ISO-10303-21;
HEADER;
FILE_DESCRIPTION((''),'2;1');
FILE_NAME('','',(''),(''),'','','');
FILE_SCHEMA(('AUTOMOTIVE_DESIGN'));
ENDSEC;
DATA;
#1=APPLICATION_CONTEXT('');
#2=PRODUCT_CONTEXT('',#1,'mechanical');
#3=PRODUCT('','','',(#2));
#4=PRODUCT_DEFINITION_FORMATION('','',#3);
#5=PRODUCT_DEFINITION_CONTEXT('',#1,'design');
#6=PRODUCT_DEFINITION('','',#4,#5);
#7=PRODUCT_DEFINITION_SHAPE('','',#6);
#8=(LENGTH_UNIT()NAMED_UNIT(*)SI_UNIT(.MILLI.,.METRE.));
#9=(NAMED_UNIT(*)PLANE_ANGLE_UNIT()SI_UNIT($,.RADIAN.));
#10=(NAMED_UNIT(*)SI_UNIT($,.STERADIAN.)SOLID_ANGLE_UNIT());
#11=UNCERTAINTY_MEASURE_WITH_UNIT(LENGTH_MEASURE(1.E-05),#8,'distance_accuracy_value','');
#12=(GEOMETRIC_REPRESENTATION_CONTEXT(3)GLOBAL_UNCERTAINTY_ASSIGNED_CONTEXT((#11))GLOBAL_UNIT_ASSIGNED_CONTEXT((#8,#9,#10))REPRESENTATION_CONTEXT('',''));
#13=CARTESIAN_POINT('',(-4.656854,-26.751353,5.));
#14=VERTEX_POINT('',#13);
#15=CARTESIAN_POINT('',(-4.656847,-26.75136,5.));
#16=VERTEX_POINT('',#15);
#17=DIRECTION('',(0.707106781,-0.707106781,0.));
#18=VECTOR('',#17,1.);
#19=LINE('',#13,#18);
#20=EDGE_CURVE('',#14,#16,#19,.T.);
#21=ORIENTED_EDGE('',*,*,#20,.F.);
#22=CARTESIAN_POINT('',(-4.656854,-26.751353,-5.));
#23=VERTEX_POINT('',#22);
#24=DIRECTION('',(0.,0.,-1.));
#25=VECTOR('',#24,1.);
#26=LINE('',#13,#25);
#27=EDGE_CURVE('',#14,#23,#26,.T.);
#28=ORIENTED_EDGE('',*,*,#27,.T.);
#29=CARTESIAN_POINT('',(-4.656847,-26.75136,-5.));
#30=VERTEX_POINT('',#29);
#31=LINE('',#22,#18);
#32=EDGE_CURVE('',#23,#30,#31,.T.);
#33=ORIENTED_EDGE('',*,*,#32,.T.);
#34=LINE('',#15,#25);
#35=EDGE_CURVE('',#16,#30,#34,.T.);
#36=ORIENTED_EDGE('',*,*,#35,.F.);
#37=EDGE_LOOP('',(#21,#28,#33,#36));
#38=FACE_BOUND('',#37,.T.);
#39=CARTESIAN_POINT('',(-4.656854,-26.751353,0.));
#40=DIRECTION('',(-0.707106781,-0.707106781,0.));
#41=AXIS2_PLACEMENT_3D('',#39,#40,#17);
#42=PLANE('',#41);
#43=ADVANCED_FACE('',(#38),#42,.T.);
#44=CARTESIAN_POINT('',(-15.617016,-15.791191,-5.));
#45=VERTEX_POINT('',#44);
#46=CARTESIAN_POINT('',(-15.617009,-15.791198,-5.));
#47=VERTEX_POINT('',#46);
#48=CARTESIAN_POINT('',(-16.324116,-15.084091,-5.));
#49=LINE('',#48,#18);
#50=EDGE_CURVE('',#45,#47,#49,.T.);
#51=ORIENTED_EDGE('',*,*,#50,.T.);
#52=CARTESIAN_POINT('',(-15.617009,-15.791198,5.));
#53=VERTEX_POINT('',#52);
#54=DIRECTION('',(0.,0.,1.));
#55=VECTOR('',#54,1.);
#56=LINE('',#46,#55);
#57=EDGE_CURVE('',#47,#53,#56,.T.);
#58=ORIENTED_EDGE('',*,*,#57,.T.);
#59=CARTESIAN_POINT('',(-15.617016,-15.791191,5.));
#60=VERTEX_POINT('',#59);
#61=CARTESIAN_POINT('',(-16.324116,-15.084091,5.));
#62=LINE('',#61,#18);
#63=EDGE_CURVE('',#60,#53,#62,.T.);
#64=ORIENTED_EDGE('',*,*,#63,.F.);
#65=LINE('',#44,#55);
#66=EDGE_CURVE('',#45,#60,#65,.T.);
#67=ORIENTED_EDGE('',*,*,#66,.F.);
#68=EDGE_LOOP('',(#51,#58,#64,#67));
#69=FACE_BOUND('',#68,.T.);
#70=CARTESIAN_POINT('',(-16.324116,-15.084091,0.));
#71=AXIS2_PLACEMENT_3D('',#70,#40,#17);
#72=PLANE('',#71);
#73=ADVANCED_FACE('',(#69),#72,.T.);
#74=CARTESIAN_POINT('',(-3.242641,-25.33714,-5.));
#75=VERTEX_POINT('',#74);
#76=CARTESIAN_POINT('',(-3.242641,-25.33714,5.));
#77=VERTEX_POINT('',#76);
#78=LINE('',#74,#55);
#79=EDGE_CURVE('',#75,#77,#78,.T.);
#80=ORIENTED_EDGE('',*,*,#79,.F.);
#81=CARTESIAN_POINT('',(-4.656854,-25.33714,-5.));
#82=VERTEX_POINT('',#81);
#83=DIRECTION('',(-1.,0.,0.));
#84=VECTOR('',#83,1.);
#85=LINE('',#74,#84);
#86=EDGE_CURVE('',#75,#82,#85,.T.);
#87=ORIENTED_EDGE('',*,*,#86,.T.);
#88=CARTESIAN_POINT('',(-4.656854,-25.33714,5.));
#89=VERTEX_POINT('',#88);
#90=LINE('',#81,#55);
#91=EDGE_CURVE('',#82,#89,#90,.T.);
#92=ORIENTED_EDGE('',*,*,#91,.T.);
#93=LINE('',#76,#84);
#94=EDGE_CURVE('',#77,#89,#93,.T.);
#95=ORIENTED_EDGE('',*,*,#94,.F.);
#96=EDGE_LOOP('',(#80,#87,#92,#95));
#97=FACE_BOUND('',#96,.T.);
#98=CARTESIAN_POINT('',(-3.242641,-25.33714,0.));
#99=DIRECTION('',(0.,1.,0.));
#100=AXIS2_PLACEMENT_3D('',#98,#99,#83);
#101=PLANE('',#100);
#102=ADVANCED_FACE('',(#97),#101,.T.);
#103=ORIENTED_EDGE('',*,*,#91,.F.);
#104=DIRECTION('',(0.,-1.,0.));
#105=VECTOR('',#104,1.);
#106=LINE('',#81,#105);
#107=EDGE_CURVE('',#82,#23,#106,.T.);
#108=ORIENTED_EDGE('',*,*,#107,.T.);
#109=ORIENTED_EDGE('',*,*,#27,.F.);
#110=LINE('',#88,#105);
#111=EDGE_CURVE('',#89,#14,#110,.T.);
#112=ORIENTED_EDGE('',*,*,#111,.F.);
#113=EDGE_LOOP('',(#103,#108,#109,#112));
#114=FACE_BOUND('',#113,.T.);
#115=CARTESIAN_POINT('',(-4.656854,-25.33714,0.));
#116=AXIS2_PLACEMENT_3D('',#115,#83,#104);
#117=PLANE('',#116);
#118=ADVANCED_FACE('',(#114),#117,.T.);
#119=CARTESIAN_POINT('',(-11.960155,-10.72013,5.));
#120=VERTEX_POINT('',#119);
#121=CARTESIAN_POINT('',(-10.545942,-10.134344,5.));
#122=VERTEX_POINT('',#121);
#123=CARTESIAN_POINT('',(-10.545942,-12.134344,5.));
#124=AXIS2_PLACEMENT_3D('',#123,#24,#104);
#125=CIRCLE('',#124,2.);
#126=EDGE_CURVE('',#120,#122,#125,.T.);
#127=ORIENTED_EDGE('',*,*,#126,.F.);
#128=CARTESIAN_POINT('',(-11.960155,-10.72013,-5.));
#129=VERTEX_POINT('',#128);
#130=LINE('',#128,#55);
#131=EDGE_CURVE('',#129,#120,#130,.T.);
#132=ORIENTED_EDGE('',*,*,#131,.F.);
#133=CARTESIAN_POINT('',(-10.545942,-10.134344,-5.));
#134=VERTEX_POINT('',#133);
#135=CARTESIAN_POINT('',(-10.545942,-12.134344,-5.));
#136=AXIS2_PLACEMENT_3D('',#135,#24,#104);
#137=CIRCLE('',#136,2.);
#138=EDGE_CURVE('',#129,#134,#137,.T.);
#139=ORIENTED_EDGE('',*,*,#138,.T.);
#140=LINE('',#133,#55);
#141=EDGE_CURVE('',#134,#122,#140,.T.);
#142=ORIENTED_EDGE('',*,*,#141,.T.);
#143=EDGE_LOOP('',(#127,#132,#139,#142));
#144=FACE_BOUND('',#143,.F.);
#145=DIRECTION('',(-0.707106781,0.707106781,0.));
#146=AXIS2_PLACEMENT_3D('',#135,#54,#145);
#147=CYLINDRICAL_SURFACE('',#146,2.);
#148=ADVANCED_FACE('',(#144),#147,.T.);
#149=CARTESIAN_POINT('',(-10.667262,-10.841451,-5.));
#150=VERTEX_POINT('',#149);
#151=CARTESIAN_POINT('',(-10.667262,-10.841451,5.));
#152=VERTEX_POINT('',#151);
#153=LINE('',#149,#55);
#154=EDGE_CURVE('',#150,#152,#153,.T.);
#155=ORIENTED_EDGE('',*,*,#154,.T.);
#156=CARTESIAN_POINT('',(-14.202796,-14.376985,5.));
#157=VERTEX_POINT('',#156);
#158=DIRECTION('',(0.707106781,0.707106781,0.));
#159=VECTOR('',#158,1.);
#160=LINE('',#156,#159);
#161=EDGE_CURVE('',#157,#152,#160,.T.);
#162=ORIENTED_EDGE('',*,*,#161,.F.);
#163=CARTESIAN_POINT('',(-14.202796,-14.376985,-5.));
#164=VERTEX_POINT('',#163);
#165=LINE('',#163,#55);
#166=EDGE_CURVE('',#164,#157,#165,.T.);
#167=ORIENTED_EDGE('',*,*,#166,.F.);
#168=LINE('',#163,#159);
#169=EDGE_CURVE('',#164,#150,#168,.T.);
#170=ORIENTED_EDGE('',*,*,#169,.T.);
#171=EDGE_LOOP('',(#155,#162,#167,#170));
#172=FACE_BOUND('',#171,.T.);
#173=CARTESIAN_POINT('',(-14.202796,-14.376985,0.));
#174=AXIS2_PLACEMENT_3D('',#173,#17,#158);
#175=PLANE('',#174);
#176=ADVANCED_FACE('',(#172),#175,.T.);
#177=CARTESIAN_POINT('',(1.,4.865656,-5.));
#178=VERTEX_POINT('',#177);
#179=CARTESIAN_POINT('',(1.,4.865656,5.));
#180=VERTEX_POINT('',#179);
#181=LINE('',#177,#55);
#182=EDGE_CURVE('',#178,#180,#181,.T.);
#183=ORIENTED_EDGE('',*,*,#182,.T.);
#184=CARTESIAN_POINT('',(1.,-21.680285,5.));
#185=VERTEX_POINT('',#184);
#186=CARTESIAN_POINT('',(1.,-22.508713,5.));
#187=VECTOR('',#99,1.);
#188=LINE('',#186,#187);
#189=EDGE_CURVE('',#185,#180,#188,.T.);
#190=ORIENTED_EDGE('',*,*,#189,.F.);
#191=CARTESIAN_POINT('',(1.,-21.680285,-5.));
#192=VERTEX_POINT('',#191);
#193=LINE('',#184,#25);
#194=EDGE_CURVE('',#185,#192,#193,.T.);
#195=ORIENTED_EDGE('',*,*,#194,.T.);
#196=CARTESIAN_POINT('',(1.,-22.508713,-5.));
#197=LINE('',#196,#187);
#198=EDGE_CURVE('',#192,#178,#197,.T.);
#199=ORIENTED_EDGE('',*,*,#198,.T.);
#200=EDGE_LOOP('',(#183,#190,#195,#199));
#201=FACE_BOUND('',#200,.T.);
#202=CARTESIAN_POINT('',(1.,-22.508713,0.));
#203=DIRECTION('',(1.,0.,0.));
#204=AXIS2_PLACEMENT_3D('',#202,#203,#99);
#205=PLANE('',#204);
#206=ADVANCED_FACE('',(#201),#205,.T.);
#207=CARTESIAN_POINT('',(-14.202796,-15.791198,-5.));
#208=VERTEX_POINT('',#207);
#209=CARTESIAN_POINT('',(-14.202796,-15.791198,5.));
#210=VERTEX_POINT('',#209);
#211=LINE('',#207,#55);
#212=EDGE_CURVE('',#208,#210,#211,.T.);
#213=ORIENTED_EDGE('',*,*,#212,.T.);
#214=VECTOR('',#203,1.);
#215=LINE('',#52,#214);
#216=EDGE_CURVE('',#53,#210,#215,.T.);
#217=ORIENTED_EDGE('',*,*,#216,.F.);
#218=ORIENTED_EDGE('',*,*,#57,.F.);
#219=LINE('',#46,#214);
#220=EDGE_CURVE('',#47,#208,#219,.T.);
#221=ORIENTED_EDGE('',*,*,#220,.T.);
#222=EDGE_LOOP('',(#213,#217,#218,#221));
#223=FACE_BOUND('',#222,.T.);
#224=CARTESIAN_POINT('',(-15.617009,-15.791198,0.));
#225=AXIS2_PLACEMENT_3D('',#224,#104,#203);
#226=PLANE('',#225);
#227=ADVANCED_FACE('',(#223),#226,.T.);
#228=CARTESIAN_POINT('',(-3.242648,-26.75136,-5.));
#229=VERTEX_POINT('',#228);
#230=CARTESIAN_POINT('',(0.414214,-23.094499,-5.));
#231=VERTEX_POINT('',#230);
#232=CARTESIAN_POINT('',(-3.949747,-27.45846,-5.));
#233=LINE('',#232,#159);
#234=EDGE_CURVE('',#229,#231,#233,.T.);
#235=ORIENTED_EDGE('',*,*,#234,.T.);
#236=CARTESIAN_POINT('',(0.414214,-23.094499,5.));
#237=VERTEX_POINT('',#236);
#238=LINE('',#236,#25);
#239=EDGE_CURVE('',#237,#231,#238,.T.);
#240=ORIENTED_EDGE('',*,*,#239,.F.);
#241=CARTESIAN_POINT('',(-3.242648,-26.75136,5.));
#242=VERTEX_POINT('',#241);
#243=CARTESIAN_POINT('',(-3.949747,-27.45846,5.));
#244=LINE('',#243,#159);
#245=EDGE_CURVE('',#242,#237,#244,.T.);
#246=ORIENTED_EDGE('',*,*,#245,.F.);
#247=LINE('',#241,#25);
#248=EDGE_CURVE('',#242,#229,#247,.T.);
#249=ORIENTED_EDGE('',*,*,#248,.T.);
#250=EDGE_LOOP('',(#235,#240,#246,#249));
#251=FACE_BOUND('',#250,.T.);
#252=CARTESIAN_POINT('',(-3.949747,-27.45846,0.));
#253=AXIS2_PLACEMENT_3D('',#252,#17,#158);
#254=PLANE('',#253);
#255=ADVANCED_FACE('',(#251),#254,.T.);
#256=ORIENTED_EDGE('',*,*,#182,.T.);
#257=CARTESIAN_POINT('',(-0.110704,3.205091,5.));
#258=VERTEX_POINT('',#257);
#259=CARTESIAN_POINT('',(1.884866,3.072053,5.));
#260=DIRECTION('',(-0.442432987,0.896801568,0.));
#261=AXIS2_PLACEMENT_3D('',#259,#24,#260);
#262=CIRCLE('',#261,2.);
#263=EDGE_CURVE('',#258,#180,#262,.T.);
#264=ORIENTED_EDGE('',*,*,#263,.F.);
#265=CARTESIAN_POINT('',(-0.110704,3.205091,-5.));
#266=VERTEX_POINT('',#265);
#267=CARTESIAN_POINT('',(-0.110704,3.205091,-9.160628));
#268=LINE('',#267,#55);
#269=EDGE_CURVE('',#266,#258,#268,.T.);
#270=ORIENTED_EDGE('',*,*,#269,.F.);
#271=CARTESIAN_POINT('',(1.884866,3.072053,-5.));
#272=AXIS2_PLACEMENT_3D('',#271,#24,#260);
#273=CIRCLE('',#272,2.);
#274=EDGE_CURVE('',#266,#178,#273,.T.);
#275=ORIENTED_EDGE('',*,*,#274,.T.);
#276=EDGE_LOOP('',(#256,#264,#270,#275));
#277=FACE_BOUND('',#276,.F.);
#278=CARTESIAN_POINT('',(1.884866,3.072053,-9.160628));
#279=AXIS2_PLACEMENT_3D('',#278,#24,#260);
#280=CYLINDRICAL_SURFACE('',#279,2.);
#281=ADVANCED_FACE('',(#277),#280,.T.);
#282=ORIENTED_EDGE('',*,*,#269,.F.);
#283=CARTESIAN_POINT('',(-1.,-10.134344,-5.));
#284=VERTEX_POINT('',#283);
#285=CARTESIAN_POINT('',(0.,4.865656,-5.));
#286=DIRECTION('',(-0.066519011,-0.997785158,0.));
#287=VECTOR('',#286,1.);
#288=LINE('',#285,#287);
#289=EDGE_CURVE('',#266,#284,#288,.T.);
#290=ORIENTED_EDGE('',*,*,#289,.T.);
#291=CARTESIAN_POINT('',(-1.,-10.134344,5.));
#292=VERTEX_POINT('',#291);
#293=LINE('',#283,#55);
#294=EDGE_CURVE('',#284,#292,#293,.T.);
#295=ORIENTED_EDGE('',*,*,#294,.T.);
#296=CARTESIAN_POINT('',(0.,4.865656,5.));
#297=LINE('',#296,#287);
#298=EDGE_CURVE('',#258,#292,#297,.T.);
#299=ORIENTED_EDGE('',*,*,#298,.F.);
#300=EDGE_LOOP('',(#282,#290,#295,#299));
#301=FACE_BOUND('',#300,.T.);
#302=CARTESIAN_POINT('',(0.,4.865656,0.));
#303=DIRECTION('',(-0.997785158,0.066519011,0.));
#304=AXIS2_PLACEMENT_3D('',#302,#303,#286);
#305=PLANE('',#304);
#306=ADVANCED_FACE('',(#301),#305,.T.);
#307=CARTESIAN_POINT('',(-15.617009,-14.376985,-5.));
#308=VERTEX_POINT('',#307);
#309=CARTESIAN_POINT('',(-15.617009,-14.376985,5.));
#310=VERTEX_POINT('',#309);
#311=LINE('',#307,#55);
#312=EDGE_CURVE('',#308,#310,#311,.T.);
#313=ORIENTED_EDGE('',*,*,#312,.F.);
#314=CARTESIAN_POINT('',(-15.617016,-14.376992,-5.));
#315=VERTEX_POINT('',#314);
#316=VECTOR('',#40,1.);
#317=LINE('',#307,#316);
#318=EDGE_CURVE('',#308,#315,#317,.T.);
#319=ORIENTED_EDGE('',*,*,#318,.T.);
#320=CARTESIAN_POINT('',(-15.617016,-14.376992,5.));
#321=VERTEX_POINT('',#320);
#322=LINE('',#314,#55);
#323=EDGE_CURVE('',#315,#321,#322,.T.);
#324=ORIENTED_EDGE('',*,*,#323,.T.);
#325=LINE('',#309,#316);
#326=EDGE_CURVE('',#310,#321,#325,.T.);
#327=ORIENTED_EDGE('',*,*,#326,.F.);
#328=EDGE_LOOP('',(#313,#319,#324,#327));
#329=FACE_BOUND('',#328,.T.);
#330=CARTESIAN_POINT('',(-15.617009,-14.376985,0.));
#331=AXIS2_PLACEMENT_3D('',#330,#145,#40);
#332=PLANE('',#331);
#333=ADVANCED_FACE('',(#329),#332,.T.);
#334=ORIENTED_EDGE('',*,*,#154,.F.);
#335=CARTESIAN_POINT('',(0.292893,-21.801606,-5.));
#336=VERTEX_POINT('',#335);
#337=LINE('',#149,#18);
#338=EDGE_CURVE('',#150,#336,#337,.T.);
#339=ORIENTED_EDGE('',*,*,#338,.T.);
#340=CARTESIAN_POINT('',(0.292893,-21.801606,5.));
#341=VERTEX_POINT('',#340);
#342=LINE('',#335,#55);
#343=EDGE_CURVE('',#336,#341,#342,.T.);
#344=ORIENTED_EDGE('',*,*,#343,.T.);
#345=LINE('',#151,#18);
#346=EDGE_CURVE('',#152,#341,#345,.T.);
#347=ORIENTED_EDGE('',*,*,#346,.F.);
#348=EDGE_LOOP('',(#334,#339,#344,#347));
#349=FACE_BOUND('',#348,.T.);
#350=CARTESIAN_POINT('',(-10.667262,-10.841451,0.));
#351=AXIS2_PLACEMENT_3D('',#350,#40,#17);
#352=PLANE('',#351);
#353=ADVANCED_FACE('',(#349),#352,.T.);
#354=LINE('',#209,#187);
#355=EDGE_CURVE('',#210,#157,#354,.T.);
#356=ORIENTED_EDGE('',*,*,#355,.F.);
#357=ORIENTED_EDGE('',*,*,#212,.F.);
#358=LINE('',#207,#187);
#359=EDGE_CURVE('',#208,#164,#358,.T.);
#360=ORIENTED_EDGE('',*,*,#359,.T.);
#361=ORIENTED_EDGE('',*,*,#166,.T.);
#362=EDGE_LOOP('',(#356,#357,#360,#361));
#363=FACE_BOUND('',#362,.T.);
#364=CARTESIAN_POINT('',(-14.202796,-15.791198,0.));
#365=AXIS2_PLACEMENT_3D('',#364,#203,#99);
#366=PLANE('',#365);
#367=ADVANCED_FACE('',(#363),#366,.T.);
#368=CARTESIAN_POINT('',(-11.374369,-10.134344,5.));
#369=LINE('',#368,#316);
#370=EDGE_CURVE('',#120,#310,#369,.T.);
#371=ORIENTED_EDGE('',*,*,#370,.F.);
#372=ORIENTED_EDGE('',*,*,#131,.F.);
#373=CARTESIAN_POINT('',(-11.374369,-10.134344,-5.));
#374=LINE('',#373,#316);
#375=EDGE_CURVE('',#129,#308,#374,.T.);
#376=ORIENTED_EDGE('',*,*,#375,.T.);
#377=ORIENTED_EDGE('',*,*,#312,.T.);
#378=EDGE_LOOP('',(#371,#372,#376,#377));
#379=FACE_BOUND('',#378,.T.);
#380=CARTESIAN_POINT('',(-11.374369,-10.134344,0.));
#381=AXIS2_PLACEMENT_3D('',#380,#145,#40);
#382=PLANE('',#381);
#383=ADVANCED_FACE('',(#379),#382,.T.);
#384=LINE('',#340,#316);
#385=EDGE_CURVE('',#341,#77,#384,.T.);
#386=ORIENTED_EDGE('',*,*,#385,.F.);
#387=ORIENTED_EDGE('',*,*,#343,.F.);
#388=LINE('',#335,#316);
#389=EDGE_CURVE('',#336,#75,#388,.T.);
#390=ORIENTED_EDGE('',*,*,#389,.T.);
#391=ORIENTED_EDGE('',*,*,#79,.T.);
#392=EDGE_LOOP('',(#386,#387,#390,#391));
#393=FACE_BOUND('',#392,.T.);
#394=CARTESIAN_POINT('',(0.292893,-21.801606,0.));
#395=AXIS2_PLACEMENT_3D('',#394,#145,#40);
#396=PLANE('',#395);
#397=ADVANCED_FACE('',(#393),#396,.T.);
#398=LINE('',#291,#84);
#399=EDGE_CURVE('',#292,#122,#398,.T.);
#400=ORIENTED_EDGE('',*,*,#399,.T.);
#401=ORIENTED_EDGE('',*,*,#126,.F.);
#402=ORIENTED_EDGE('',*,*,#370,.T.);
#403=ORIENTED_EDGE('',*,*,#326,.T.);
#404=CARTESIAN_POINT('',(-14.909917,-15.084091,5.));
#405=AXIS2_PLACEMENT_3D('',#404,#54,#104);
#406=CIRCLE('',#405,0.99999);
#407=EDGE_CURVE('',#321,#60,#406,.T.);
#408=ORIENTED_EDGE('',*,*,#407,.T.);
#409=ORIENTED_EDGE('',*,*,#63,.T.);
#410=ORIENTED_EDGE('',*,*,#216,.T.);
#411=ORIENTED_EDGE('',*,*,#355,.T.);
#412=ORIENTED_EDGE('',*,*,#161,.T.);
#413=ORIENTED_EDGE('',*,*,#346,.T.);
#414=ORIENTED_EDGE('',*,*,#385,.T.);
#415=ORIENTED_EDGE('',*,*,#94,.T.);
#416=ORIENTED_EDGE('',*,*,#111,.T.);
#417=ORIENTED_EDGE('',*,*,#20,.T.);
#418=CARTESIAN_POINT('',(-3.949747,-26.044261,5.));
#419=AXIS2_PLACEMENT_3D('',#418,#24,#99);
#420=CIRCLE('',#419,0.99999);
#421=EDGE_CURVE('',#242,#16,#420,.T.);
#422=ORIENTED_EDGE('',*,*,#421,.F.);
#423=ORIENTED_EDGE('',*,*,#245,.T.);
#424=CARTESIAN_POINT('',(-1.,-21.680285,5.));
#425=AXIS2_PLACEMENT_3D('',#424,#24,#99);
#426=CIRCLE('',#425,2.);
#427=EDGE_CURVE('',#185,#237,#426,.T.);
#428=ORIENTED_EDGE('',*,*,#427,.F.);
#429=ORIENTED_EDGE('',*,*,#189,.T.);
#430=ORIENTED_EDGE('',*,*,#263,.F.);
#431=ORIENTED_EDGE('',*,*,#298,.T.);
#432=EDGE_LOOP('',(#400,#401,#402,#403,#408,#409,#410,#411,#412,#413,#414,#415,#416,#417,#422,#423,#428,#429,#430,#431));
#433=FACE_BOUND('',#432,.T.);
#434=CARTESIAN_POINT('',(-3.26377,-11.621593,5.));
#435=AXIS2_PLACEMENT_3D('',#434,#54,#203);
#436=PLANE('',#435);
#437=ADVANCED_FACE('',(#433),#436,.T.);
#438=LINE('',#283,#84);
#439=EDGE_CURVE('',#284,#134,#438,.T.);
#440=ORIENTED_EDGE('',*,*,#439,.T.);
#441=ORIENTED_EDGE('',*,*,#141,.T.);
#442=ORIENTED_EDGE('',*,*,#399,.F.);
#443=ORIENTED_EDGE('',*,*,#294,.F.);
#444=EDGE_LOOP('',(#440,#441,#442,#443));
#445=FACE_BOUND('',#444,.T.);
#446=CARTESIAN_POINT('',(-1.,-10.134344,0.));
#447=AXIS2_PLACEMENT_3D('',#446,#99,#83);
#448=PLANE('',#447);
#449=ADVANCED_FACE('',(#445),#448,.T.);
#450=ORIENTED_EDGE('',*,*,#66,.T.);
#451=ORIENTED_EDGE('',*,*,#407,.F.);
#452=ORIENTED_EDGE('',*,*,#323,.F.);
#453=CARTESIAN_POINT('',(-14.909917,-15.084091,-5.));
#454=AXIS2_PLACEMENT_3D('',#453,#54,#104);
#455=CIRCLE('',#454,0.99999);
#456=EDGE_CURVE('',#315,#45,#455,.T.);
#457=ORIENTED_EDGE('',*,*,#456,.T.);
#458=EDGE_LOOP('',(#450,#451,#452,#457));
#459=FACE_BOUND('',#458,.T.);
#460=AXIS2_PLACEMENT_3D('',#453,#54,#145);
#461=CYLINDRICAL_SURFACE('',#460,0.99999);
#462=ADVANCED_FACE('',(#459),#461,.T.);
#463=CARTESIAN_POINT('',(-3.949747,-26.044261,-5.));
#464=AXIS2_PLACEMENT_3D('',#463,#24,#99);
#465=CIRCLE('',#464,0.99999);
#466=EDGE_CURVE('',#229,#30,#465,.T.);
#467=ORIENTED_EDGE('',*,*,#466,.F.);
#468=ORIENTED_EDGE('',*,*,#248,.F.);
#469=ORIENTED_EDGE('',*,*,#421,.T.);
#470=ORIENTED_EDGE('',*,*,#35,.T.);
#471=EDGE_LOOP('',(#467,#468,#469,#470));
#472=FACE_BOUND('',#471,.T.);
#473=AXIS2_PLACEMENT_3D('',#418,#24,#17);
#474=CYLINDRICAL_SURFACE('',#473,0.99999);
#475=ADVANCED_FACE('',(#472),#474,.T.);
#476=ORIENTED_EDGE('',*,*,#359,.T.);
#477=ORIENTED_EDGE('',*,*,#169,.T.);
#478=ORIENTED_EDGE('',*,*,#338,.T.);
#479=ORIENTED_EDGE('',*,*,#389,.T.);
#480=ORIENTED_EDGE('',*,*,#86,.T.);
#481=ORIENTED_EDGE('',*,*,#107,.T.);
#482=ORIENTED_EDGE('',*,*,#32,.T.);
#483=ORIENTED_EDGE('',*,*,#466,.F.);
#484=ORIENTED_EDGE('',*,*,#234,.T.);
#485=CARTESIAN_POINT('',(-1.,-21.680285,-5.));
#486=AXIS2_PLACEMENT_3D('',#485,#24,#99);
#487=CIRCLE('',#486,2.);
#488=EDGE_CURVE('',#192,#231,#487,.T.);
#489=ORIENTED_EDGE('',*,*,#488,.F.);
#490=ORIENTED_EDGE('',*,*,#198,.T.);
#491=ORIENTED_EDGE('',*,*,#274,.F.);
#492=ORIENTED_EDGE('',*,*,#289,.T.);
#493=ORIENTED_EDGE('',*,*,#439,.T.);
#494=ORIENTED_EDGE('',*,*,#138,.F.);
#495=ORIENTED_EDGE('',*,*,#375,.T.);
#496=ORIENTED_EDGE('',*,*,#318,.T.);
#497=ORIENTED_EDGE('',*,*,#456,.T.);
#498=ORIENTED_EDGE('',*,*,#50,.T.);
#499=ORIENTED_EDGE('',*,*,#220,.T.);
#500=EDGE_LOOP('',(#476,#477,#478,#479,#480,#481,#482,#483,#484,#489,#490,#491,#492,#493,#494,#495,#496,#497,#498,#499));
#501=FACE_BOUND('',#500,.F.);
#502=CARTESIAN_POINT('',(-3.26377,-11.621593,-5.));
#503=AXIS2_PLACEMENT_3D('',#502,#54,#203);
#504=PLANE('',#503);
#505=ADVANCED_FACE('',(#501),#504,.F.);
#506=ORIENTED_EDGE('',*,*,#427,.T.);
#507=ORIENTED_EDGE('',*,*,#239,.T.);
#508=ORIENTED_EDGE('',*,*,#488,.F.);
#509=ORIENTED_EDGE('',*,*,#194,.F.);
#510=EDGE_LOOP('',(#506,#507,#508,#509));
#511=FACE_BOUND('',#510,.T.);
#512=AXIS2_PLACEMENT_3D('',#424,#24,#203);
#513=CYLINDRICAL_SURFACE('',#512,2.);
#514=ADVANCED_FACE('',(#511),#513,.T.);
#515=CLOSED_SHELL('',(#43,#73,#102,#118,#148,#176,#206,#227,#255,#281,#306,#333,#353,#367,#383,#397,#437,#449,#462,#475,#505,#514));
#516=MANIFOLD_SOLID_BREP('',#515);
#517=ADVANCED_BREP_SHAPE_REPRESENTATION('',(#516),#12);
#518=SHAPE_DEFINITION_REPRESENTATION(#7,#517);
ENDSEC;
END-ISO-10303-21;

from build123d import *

# Parameters (mm, degrees)
F1_DEPTH    = 5
F2_R        = 2
F3_R        = 0.99999
F4_T1_DEPTH = 18.321255839


# Not quite as in the source:
# - a fillet or chamfer that OpenCascade refuses, or shapes differently, is made with other operations: its cross-section is extruded or revolved along the edge and cut away or added
# - a fillet or chamfer is up to 0.001 mm smaller than in the source, because OpenCascade refuses the exact size


with BuildPart() as f1:
    # F0 (on Top) → F1 (new body, symmetric)
    with BuildSketch(Plane.XY):
        Polygon((-3.2426406871, -26.7513532198), (1, -22.5087125327), (1, 4.8656561381), (0, 4.8656561381), (-1, -10.1343438619), (-11.3743686708, -10.1343438619), (-15.6170093579, -14.3769845491), (-14.2027957955, -14.3769845491), (-10.6672618896, -10.8414506431), (0.2928932188, -21.8016057515), (-3.2426406871, -25.3371396575), align=None)
        Polygon((-3.9497474683, -27.458460001), (-3.2426406871, -26.7513532198), (-4.6568542495, -26.7513532198), align=None)
        Polygon((-4.6568542495, -26.7513532198), (-3.2426406871, -26.7513532198), (-3.2426406871, -25.3371396575), align=None)
        Polygon((-4.6568542495, -25.3371396575), (-4.6568542495, -26.7513532198), (-3.2426406871, -25.3371396575), align=None)
        Polygon((-15.6170093579, -15.7911981114), (-15.6170093579, -14.3769845491), (-16.3241161391, -15.0840913303), align=None)
        Polygon((-14.2027957955, -14.3769845491), (-15.6170093579, -14.3769845491), (-15.6170093579, -15.7911981114), align=None)
        Polygon((-14.2027957955, -15.7911981114), (-14.2027957955, -14.3769845491), (-15.6170093579, -15.7911981114), align=None)
    extrude(amount=F1_DEPTH, both=True)

    # F2
    f2_edges = [f1.edges().sort_by_distance(p)[0] for p in [
        (-11.374369, -10.134344, 0),
        (1, -22.508713, 0),
    ]]
    fillet(f2_edges, radius=F2_R)

    # F3 (radius 1 in the source; OpenCascade refuses exactly that, so slightly less here)
    f3_edges = [f1.edges().sort_by_distance(p)[0] for p in [
        (-16.324116, -15.084091, 0),
        (-3.949747, -27.45846, 0),
    ]]
    fillet(f3_edges, radius=F3_R)

    # F4: fillet of radius 2 on 1 edges, made by hand

    # F4_s2 → F4_t1 (cut)
    with BuildSketch(Plane.XY.offset(-9.1606279195)):
        with BuildLine():
            ThreePointArc((1, 4.8656561381), (0.2224588554, 4.1839894082), (-0.1107043409, 3.2050910239))
            Line((-0.1107043409, 3.2050910239), (0, 4.8656561381))
            Line((0, 4.8656561381), (1, 4.8656561381))
        make_face()
    extrude(amount=F4_T1_DEPTH, mode=Mode.SUBTRACT)


solid = f1.part
